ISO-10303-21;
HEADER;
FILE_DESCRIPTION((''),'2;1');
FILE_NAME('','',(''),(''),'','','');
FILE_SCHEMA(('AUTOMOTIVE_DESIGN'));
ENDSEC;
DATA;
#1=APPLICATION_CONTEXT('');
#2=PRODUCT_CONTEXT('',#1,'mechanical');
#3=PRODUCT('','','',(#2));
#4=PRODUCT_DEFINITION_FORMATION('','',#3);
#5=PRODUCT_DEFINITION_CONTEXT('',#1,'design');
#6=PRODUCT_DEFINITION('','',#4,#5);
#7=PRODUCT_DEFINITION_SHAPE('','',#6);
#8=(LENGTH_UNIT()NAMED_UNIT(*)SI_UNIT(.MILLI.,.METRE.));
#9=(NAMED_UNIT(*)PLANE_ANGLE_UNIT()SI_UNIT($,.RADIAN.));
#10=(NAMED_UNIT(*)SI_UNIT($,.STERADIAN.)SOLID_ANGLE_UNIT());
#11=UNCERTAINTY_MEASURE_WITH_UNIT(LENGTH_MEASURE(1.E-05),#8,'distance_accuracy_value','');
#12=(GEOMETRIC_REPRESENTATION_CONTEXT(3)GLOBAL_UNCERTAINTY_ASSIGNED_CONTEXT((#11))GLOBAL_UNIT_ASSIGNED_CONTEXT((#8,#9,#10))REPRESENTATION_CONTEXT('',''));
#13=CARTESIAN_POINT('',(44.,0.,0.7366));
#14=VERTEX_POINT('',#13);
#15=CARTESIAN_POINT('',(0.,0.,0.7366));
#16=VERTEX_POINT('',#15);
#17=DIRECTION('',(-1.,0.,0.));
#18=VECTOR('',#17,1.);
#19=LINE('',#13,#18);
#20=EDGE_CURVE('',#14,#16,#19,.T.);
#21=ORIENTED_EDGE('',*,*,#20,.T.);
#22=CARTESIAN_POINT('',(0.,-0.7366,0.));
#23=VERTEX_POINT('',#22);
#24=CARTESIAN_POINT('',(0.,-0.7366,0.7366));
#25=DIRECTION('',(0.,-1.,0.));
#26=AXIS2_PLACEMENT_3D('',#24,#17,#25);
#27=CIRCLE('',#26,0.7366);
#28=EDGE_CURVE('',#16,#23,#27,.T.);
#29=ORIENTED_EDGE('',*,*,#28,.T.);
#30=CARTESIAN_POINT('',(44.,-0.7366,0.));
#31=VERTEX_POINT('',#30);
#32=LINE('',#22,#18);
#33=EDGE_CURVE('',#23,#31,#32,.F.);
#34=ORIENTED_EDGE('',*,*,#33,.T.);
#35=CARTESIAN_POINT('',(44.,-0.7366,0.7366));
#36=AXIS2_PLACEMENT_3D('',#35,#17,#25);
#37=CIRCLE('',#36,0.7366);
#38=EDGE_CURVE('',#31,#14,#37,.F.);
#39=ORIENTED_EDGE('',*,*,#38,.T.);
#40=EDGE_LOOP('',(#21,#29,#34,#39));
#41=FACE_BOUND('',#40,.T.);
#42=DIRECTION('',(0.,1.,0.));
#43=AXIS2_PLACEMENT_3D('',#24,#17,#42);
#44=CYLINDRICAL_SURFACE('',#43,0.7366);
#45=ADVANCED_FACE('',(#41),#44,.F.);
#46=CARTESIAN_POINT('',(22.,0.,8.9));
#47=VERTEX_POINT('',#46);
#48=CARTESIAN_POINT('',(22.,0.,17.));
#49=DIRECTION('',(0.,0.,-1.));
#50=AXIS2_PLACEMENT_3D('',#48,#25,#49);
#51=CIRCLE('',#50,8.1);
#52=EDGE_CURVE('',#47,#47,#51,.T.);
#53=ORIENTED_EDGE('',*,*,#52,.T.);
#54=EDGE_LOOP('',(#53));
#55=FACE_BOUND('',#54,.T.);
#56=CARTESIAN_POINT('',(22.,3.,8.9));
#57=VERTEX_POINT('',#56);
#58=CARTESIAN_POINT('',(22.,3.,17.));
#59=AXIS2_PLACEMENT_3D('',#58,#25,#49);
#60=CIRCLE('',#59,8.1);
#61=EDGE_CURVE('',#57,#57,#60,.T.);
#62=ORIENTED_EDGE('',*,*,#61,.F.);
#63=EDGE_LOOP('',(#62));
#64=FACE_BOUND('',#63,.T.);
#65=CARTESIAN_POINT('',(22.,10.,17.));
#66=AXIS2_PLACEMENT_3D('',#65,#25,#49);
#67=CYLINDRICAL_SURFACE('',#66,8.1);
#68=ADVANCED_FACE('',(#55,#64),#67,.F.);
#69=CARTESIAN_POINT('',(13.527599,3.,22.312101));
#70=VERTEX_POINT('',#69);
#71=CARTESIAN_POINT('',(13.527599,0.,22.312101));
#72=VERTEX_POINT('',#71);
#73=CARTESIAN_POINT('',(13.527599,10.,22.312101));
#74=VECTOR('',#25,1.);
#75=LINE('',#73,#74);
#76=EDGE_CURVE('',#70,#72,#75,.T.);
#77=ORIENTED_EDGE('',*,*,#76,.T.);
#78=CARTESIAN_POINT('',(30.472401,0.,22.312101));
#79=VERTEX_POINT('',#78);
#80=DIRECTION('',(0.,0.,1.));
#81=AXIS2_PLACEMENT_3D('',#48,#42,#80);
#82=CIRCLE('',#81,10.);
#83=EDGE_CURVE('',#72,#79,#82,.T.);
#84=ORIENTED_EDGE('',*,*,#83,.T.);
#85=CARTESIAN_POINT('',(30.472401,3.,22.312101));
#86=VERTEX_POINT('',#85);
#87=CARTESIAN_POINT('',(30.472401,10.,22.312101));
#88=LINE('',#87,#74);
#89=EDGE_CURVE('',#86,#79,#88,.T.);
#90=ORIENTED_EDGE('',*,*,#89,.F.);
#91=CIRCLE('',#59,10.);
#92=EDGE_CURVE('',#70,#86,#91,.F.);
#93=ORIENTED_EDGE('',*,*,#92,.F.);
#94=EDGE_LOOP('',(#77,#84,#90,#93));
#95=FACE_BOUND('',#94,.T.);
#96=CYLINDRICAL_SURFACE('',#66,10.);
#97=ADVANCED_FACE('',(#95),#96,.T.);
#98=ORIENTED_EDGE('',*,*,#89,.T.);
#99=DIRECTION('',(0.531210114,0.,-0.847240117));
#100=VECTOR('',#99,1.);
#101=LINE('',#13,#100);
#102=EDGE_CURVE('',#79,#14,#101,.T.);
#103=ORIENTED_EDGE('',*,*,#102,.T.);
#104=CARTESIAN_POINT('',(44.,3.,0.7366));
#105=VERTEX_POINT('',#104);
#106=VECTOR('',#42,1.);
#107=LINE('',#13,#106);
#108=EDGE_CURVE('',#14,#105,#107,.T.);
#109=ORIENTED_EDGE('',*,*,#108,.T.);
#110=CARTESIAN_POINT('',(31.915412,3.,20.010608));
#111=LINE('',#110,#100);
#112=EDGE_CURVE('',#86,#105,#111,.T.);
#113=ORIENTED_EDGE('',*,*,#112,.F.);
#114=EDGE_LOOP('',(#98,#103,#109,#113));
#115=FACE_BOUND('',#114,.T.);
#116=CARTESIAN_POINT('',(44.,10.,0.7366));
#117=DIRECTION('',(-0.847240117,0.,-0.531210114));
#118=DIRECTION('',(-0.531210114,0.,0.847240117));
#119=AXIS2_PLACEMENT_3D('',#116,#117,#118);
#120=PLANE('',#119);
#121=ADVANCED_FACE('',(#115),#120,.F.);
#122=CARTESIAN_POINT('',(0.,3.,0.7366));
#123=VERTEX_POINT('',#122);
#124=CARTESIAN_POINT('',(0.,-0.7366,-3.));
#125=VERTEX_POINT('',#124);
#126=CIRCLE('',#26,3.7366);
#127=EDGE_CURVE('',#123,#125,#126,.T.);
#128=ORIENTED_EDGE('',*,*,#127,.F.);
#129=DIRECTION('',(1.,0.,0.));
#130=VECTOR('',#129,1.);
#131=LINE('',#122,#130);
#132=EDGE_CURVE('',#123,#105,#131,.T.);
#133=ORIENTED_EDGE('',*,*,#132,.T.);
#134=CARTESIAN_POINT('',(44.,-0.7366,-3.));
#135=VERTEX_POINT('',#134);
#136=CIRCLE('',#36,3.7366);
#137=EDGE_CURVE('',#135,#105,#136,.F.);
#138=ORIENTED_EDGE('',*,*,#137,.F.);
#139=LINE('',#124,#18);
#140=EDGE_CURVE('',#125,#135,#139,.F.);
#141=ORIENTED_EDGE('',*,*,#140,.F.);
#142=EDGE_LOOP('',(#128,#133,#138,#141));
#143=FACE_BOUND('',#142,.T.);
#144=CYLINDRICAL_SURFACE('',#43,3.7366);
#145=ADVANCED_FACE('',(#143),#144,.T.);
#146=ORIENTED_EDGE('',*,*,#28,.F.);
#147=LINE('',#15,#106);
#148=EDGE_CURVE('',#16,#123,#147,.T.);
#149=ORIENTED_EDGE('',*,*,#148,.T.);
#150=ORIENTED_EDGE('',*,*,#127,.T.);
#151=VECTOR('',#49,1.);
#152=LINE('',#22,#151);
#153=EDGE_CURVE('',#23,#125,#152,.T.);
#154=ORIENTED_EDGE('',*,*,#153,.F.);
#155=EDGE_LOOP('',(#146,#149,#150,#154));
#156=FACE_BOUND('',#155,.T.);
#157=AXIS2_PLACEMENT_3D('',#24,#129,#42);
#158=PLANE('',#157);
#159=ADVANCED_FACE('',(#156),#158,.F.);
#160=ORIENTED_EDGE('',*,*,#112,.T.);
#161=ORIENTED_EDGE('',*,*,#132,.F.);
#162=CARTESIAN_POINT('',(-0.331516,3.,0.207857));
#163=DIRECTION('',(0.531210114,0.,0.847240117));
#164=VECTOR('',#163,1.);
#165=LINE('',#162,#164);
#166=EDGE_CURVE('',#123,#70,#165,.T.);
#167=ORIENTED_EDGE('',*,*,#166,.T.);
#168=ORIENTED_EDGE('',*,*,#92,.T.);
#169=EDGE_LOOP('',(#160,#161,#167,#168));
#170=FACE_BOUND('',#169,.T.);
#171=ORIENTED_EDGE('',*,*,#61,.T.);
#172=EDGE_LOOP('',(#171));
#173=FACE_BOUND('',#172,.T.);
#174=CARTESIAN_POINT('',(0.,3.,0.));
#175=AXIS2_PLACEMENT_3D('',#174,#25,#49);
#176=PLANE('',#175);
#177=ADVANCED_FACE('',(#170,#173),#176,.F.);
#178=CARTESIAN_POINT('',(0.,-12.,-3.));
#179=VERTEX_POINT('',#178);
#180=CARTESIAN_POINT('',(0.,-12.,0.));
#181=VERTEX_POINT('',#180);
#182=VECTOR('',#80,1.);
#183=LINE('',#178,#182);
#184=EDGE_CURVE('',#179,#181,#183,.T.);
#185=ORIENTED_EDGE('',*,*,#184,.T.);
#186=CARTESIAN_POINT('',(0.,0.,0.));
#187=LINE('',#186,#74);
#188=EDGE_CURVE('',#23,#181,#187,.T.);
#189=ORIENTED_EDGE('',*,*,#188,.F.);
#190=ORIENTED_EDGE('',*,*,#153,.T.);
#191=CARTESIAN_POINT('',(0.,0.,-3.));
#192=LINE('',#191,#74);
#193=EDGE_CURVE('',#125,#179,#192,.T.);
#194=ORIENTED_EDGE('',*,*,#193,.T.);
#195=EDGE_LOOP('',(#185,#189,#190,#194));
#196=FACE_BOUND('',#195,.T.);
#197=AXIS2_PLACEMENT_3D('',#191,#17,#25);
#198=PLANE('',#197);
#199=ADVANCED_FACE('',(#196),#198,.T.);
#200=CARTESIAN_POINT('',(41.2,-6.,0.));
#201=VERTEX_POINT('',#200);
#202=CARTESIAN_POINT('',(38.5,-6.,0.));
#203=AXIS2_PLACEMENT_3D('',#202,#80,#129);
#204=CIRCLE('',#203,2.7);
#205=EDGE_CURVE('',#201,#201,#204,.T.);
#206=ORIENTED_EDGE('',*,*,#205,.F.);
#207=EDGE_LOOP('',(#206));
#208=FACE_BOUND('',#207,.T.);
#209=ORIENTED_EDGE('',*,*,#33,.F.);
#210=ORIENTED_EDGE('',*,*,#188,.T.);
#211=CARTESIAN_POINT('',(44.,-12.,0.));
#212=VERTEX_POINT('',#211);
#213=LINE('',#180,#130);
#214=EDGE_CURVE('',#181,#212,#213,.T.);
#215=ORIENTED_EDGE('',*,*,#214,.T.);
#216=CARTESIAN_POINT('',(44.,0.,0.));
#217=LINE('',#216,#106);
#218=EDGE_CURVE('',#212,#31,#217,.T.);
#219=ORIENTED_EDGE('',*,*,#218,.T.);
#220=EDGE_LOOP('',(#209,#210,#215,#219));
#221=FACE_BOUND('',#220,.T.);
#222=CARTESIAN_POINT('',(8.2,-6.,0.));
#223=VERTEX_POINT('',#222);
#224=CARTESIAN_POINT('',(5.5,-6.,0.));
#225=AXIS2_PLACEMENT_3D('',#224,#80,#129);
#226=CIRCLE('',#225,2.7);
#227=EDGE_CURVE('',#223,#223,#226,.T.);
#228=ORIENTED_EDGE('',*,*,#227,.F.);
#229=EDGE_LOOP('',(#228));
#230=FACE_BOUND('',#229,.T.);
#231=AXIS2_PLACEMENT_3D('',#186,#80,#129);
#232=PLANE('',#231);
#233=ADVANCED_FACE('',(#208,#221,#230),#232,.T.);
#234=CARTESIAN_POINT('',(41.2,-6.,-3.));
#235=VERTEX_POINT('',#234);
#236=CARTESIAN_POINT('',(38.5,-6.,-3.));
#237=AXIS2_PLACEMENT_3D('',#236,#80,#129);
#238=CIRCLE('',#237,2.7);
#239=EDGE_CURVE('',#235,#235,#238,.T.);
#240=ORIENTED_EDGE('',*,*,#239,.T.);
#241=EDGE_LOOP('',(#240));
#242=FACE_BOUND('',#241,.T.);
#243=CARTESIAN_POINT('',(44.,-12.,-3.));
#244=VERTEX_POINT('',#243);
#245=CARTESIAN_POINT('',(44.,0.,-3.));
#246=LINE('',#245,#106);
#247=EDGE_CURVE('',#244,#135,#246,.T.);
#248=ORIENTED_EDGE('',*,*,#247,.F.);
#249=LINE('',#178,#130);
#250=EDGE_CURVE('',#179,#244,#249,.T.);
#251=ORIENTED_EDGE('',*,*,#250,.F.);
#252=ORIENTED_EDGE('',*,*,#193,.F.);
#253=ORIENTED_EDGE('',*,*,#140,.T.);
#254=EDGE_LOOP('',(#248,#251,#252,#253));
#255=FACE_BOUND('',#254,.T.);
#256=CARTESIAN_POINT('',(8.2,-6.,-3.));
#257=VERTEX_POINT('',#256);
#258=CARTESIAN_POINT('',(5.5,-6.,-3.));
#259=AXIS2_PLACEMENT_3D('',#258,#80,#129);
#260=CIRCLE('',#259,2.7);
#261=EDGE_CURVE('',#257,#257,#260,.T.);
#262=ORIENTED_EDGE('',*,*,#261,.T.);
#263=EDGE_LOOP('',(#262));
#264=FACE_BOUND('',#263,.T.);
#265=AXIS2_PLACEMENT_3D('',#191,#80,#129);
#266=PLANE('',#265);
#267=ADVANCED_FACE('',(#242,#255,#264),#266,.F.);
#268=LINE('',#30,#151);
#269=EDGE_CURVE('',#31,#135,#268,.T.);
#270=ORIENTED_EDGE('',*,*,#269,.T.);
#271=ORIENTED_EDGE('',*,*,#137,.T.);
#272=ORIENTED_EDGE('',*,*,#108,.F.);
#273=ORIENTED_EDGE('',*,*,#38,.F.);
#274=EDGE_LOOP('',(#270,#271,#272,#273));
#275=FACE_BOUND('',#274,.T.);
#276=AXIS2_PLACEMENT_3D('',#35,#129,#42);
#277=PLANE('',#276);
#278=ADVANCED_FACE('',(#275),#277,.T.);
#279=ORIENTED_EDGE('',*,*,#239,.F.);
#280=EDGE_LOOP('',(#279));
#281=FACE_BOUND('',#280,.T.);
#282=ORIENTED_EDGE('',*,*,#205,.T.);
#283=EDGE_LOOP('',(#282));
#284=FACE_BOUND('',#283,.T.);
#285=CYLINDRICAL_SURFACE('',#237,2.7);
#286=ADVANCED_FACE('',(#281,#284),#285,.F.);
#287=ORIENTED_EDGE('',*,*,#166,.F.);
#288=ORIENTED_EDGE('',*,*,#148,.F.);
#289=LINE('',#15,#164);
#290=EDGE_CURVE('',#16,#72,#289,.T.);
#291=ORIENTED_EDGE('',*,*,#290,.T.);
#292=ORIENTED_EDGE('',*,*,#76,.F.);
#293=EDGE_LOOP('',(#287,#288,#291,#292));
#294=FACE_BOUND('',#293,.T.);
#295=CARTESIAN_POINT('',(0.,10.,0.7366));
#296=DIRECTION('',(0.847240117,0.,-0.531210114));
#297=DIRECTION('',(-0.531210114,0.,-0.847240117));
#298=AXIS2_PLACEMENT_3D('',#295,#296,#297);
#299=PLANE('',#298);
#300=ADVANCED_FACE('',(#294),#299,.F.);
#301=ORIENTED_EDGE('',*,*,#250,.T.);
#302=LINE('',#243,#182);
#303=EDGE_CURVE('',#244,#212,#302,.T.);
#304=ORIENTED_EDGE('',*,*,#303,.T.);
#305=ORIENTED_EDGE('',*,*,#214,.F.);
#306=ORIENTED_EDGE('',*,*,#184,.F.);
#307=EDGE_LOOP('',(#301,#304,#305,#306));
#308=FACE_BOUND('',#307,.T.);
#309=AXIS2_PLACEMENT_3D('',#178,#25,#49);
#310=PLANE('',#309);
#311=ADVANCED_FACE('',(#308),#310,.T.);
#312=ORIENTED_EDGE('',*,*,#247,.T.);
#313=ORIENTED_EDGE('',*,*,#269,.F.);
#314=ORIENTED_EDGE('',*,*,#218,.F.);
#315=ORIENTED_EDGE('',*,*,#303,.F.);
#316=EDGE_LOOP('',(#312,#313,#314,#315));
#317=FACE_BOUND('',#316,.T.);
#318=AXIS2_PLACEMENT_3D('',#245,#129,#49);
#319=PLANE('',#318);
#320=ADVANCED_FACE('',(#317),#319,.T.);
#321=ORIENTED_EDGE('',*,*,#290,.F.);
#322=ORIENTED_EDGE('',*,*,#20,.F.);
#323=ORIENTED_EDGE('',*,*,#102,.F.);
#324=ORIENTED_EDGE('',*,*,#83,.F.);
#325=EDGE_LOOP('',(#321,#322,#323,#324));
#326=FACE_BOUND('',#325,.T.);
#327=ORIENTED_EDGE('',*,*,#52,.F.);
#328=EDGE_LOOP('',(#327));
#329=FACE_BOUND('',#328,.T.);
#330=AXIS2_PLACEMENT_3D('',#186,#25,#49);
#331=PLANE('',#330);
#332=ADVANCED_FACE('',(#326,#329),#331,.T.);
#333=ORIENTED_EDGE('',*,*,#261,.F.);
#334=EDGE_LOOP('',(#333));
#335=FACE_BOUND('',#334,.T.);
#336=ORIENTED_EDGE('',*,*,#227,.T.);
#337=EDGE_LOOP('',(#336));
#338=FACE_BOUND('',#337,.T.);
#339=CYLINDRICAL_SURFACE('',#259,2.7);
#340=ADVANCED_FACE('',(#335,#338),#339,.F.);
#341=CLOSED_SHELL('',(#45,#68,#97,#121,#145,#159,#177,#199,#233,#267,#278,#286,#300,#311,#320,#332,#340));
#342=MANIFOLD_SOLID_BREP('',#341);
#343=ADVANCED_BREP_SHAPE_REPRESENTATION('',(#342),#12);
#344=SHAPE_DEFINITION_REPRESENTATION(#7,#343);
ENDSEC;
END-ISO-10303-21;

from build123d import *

# Parameters (mm, degrees)
SKETCH2_W                    = 44
SKETCH2_H                    = 12
SKETCH2_R                    = 2.7
BASE_FLANGE1_DEPTH           = 3
EDGE_FLANGE1_STRIP_W         = 13.4732
EDGE_FLANGE1_STRIP_H         = 3
EDGE_FLANGE1_STRIP_CUT_DEPTH = 44
EDGE_FLANGE1_DEPTH           = 44
CUT_EXTRUDE1_DEPTH           = 10
SKETCH11_R                   = 8.1
CUT_EXTRUDE2_DEPTH           = 10


# Sheet-metal steps are written as plain solids
with BuildPart() as part:
    # Sketch2 → Base-Flange1 (new body)
    with BuildSketch(Plane.XY):
        with Locations((22, -6)):
            Rectangle(SKETCH2_W, SKETCH2_H)
        with Locations((5.5, -6)):
            Circle(SKETCH2_R, mode=Mode.SUBTRACT)
        with Locations((38.5, -6)):
            Circle(SKETCH2_R, mode=Mode.SUBTRACT)
    extrude(amount=-BASE_FLANGE1_DEPTH)

    # Edge-Flange1 strip (across the edge) → Edge-Flange1 strip cut (cut)
    with BuildSketch(Plane(origin=(44, 0, 0), x_dir=(0, -1, 0), z_dir=(-1, 0, 0))):
        with Locations((-6, -1.5)):
            Rectangle(EDGE_FLANGE1_STRIP_W, EDGE_FLANGE1_STRIP_H)
    extrude(amount=EDGE_FLANGE1_STRIP_CUT_DEPTH, mode=Mode.SUBTRACT)

    # Edge-Flange1 section (across the edge) → Edge-Flange1 (add)
    with BuildSketch(Plane(origin=(44, 0, 0), x_dir=(0, -1, 0), z_dir=(-1, 0, 0))):
        with BuildLine():
            Line((-3, 0.7366), (-3, 29.1))
            Line((-3, 29.1), (0, 29.1))
            Line((0, 29.1), (0, 0.7366))
            ThreePointArc((0, 0.7366), (0.215745145, 0.215745145), (0.7366, 0))
            Line((0.7366, 0), (0.7366, -3))
            ThreePointArc((0.7366, -3), (-1.905575199, -1.905575199), (-3, 0.7366))
        make_face()
    extrude(amount=EDGE_FLANGE1_DEPTH)

    # Sketch10 → Cut-Extrude1 (cut)
    with BuildSketch(Plane.XZ):
        with BuildLine():
            Line((0, 0.7366), (13.527598835, 22.312101137))
            ThreePointArc((13.527598835, 22.312101137), (22, 27), (30.472401165, 22.312101137))
            Line((30.472401165, 22.312101137), (44, 0.7366))
            Line((44, 0.7366), (48.421398218, 0.7366))
            Line((48.421398218, 0.7366), (48.421398218, 35.108579441))
            Line((48.421398218, 35.108579441), (-4.285342107, 35.108579441))
            Line((-4.285342107, 35.108579441), (-4.285342107, 0.7366))
            Line((-4.285342107, 0.7366), (0, 0.7366))
        make_face()
    extrude(amount=-CUT_EXTRUDE1_DEPTH, mode=Mode.SUBTRACT)

    # Sketch11 → Cut-Extrude2 (cut)
    with BuildSketch(Plane.XZ):
        with Locations(Location((22, 17, 0), (0, 0, 270))):
            Circle(SKETCH11_R)
    extrude(amount=-CUT_EXTRUDE2_DEPTH, mode=Mode.SUBTRACT)


solid = part.part
